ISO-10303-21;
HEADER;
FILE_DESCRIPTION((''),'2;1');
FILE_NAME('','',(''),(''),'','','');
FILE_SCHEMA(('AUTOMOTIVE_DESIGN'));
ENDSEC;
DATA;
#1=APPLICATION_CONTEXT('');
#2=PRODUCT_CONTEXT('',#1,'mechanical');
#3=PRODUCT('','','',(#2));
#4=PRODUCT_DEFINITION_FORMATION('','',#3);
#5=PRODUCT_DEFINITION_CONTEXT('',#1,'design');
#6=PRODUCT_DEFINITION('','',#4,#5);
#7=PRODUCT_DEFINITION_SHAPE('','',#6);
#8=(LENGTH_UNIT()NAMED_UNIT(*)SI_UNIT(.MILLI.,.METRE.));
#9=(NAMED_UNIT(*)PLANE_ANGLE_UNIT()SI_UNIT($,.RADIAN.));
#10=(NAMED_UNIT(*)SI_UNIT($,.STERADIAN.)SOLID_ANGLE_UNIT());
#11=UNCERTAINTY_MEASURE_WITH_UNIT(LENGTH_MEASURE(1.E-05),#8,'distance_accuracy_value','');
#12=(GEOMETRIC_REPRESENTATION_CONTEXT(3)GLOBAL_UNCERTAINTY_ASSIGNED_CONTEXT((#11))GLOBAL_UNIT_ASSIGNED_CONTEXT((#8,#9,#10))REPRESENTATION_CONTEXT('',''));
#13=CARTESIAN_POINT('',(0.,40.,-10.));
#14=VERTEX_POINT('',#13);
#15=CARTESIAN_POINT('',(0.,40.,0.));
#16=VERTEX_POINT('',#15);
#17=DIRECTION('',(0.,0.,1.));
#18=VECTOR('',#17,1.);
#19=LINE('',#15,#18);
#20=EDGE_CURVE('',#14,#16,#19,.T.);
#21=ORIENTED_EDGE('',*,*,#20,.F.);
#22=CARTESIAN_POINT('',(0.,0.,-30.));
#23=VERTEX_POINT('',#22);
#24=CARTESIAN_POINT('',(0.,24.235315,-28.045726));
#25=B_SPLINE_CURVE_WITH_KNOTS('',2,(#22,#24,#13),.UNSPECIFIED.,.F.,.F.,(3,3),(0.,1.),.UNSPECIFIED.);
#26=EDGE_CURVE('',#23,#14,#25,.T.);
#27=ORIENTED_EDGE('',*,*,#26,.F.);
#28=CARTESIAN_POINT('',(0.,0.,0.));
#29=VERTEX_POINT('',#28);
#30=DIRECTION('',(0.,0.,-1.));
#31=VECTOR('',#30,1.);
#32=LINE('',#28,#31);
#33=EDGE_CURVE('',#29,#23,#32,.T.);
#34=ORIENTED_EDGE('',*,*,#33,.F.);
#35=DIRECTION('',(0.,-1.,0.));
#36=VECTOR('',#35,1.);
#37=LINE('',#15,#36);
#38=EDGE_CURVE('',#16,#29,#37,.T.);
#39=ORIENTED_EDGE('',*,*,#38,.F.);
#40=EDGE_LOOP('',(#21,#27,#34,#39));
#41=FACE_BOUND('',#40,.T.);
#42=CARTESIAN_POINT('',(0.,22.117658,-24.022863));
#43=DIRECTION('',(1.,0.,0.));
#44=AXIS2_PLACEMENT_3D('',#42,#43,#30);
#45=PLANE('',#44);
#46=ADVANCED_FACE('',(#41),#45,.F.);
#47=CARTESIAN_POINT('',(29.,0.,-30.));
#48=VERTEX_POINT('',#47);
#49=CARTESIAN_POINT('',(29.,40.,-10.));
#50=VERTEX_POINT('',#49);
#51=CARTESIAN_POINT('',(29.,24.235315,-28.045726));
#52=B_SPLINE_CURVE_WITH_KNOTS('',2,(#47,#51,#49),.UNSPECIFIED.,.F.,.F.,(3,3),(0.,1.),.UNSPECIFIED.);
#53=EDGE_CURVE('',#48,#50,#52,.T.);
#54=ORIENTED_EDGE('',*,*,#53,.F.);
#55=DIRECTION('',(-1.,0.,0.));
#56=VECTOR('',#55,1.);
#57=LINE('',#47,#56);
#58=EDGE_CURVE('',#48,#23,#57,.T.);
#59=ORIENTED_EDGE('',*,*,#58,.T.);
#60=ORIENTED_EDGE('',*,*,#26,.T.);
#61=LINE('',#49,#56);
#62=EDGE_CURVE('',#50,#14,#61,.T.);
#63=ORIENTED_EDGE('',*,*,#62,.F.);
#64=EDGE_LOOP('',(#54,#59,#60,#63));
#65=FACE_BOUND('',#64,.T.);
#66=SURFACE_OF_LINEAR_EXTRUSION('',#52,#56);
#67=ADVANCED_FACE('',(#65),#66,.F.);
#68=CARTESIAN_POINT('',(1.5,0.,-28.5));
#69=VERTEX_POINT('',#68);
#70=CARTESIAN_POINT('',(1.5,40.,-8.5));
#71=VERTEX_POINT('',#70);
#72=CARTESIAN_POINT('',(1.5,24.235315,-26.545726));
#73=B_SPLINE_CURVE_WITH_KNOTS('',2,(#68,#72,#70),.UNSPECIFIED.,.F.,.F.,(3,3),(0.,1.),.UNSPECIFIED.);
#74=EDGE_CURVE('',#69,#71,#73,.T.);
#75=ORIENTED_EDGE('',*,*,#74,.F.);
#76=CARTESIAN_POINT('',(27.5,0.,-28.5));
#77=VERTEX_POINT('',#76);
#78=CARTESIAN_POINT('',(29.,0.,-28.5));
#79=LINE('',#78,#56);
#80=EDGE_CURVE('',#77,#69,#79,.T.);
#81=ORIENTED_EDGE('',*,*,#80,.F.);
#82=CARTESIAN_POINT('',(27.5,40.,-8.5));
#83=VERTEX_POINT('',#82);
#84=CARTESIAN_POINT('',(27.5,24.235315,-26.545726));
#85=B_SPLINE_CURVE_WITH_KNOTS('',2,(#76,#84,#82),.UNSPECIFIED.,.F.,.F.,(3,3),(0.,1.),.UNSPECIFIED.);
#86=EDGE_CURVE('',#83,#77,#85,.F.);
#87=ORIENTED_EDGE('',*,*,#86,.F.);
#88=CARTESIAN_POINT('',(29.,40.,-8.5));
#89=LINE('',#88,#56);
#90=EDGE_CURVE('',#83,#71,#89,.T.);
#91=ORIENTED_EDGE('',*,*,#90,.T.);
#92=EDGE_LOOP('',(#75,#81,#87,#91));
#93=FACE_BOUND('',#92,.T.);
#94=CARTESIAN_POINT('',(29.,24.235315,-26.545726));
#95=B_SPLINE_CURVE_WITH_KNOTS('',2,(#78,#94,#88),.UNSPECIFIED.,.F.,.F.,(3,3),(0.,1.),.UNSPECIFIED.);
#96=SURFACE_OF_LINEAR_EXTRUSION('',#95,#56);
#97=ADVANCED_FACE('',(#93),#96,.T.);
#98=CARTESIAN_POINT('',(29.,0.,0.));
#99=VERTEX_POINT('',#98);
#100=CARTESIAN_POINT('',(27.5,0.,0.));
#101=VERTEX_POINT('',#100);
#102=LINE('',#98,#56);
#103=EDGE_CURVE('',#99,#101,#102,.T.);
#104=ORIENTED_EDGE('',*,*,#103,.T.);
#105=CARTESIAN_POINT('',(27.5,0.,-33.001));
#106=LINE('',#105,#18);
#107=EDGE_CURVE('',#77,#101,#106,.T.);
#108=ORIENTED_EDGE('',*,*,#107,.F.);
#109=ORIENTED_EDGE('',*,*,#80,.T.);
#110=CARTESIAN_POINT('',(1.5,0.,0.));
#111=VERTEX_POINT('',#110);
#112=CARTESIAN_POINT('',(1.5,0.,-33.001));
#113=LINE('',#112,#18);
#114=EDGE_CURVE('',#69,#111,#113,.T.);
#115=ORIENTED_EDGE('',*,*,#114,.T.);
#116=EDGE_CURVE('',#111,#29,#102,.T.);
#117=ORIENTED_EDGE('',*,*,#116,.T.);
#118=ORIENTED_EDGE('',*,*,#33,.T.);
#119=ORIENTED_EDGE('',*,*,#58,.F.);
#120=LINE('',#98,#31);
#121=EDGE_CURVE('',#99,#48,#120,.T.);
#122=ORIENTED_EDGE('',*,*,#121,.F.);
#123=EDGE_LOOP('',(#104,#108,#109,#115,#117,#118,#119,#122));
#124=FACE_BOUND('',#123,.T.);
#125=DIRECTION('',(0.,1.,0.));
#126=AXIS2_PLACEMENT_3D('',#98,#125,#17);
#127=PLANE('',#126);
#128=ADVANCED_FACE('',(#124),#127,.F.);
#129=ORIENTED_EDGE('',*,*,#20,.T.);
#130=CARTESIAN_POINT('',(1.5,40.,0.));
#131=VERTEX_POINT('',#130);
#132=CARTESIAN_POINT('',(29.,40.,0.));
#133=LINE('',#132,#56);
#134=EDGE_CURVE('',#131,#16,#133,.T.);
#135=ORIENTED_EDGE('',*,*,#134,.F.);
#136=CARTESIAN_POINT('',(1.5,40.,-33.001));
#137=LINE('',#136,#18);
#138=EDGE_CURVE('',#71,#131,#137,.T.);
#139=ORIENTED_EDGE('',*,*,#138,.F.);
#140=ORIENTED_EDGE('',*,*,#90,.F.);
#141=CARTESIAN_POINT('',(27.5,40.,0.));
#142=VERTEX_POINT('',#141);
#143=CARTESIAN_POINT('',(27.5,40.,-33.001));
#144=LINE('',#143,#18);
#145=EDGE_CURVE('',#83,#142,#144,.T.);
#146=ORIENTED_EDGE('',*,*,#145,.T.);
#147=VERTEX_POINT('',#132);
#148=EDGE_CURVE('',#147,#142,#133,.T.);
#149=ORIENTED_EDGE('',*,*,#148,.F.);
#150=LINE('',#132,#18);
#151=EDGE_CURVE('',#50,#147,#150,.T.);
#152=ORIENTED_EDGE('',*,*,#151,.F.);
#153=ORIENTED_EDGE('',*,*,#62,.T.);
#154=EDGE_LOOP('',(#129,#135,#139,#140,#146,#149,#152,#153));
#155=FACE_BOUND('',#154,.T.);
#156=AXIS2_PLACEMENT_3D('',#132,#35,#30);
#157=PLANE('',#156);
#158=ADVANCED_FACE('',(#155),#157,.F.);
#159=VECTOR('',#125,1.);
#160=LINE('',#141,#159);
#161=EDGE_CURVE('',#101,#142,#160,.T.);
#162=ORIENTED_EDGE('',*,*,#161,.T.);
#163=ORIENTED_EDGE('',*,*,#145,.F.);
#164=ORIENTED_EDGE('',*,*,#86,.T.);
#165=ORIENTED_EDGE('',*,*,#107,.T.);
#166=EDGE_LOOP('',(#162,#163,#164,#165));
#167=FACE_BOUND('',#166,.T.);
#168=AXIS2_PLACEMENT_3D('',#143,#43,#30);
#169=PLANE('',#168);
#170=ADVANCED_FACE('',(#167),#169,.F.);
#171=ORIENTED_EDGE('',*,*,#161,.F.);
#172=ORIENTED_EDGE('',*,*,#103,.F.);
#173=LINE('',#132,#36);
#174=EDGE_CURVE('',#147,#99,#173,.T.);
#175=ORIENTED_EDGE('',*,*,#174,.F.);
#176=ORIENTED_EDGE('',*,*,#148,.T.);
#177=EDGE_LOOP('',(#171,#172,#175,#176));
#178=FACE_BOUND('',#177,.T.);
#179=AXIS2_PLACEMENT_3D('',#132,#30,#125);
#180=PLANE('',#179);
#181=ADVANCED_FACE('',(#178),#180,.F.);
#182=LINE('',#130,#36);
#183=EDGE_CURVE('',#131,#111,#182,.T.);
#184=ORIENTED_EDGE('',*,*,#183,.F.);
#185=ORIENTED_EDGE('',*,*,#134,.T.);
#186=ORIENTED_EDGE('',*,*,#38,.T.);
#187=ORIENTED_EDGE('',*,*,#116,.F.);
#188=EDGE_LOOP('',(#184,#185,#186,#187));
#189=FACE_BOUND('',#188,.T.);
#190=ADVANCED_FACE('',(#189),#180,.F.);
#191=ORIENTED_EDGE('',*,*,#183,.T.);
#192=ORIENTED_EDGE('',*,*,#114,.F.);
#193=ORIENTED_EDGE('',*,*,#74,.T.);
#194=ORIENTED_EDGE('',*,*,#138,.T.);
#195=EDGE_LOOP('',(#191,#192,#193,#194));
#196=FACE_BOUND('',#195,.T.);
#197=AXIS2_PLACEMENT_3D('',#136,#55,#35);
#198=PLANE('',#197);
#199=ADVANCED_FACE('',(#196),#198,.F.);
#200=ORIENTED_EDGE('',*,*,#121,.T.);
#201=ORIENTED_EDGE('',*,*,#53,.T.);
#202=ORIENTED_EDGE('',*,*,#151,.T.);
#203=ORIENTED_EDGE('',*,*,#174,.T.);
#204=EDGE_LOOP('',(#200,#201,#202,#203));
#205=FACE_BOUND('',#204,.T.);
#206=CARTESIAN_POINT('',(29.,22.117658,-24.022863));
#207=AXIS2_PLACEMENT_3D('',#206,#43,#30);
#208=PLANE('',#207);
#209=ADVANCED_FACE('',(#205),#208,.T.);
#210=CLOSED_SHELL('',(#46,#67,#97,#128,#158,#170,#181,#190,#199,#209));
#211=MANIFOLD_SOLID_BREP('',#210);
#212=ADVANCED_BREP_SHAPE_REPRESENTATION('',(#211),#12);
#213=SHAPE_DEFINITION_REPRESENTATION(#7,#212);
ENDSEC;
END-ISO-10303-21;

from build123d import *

# Parameters (mm, degrees)
BOSS_EXTRUDE1_DEPTH = 29
CUT_EXTRUDE1_START  = 1.5
CUT_EXTRUDE1_DEPTH  = 26


# Read off the part's stored shape, not the designer's step: Cut-Extrude1
with BuildPart() as part:
    # Sketch1 → Boss-Extrude1 (new body)
    with BuildSketch(Plane(origin=(0, 0, 0), x_dir=(0, 0, -1), z_dir=(1, 0, 0))):
        with BuildLine():
            Line((0, 40), (0, 0))
            Line((0, 0), (30, 0))
            add(Edge.make_bspline(
                [(10, 40), (28.045726498, 24.235315383), (30, 0)],
                knots=[0, 0, 0, 1, 1, 1], degree=2))
            Line((10, 40), (0, 40))
        make_face()
    extrude(amount=BOSS_EXTRUDE1_DEPTH)

    # Cut-Extrude1 outline → Cut-Extrude1 (cut)
    with BuildSketch(Plane.YZ.offset(CUT_EXTRUDE1_START)):
        with BuildLine():
            Line((0, 0), (0, -28.5))
            add(Edge.make_bspline(
                [(0, -28.5), (24.235315383, -26.545726498), (40, -8.5)],
                knots=[0, 0, 0, 1, 1, 1], degree=2))
            Line((40, -8.5), (40, 0))
            Line((40, 0), (0, 0))
        make_face()
    extrude(amount=CUT_EXTRUDE1_DEPTH, mode=Mode.SUBTRACT)


solid = part.part
